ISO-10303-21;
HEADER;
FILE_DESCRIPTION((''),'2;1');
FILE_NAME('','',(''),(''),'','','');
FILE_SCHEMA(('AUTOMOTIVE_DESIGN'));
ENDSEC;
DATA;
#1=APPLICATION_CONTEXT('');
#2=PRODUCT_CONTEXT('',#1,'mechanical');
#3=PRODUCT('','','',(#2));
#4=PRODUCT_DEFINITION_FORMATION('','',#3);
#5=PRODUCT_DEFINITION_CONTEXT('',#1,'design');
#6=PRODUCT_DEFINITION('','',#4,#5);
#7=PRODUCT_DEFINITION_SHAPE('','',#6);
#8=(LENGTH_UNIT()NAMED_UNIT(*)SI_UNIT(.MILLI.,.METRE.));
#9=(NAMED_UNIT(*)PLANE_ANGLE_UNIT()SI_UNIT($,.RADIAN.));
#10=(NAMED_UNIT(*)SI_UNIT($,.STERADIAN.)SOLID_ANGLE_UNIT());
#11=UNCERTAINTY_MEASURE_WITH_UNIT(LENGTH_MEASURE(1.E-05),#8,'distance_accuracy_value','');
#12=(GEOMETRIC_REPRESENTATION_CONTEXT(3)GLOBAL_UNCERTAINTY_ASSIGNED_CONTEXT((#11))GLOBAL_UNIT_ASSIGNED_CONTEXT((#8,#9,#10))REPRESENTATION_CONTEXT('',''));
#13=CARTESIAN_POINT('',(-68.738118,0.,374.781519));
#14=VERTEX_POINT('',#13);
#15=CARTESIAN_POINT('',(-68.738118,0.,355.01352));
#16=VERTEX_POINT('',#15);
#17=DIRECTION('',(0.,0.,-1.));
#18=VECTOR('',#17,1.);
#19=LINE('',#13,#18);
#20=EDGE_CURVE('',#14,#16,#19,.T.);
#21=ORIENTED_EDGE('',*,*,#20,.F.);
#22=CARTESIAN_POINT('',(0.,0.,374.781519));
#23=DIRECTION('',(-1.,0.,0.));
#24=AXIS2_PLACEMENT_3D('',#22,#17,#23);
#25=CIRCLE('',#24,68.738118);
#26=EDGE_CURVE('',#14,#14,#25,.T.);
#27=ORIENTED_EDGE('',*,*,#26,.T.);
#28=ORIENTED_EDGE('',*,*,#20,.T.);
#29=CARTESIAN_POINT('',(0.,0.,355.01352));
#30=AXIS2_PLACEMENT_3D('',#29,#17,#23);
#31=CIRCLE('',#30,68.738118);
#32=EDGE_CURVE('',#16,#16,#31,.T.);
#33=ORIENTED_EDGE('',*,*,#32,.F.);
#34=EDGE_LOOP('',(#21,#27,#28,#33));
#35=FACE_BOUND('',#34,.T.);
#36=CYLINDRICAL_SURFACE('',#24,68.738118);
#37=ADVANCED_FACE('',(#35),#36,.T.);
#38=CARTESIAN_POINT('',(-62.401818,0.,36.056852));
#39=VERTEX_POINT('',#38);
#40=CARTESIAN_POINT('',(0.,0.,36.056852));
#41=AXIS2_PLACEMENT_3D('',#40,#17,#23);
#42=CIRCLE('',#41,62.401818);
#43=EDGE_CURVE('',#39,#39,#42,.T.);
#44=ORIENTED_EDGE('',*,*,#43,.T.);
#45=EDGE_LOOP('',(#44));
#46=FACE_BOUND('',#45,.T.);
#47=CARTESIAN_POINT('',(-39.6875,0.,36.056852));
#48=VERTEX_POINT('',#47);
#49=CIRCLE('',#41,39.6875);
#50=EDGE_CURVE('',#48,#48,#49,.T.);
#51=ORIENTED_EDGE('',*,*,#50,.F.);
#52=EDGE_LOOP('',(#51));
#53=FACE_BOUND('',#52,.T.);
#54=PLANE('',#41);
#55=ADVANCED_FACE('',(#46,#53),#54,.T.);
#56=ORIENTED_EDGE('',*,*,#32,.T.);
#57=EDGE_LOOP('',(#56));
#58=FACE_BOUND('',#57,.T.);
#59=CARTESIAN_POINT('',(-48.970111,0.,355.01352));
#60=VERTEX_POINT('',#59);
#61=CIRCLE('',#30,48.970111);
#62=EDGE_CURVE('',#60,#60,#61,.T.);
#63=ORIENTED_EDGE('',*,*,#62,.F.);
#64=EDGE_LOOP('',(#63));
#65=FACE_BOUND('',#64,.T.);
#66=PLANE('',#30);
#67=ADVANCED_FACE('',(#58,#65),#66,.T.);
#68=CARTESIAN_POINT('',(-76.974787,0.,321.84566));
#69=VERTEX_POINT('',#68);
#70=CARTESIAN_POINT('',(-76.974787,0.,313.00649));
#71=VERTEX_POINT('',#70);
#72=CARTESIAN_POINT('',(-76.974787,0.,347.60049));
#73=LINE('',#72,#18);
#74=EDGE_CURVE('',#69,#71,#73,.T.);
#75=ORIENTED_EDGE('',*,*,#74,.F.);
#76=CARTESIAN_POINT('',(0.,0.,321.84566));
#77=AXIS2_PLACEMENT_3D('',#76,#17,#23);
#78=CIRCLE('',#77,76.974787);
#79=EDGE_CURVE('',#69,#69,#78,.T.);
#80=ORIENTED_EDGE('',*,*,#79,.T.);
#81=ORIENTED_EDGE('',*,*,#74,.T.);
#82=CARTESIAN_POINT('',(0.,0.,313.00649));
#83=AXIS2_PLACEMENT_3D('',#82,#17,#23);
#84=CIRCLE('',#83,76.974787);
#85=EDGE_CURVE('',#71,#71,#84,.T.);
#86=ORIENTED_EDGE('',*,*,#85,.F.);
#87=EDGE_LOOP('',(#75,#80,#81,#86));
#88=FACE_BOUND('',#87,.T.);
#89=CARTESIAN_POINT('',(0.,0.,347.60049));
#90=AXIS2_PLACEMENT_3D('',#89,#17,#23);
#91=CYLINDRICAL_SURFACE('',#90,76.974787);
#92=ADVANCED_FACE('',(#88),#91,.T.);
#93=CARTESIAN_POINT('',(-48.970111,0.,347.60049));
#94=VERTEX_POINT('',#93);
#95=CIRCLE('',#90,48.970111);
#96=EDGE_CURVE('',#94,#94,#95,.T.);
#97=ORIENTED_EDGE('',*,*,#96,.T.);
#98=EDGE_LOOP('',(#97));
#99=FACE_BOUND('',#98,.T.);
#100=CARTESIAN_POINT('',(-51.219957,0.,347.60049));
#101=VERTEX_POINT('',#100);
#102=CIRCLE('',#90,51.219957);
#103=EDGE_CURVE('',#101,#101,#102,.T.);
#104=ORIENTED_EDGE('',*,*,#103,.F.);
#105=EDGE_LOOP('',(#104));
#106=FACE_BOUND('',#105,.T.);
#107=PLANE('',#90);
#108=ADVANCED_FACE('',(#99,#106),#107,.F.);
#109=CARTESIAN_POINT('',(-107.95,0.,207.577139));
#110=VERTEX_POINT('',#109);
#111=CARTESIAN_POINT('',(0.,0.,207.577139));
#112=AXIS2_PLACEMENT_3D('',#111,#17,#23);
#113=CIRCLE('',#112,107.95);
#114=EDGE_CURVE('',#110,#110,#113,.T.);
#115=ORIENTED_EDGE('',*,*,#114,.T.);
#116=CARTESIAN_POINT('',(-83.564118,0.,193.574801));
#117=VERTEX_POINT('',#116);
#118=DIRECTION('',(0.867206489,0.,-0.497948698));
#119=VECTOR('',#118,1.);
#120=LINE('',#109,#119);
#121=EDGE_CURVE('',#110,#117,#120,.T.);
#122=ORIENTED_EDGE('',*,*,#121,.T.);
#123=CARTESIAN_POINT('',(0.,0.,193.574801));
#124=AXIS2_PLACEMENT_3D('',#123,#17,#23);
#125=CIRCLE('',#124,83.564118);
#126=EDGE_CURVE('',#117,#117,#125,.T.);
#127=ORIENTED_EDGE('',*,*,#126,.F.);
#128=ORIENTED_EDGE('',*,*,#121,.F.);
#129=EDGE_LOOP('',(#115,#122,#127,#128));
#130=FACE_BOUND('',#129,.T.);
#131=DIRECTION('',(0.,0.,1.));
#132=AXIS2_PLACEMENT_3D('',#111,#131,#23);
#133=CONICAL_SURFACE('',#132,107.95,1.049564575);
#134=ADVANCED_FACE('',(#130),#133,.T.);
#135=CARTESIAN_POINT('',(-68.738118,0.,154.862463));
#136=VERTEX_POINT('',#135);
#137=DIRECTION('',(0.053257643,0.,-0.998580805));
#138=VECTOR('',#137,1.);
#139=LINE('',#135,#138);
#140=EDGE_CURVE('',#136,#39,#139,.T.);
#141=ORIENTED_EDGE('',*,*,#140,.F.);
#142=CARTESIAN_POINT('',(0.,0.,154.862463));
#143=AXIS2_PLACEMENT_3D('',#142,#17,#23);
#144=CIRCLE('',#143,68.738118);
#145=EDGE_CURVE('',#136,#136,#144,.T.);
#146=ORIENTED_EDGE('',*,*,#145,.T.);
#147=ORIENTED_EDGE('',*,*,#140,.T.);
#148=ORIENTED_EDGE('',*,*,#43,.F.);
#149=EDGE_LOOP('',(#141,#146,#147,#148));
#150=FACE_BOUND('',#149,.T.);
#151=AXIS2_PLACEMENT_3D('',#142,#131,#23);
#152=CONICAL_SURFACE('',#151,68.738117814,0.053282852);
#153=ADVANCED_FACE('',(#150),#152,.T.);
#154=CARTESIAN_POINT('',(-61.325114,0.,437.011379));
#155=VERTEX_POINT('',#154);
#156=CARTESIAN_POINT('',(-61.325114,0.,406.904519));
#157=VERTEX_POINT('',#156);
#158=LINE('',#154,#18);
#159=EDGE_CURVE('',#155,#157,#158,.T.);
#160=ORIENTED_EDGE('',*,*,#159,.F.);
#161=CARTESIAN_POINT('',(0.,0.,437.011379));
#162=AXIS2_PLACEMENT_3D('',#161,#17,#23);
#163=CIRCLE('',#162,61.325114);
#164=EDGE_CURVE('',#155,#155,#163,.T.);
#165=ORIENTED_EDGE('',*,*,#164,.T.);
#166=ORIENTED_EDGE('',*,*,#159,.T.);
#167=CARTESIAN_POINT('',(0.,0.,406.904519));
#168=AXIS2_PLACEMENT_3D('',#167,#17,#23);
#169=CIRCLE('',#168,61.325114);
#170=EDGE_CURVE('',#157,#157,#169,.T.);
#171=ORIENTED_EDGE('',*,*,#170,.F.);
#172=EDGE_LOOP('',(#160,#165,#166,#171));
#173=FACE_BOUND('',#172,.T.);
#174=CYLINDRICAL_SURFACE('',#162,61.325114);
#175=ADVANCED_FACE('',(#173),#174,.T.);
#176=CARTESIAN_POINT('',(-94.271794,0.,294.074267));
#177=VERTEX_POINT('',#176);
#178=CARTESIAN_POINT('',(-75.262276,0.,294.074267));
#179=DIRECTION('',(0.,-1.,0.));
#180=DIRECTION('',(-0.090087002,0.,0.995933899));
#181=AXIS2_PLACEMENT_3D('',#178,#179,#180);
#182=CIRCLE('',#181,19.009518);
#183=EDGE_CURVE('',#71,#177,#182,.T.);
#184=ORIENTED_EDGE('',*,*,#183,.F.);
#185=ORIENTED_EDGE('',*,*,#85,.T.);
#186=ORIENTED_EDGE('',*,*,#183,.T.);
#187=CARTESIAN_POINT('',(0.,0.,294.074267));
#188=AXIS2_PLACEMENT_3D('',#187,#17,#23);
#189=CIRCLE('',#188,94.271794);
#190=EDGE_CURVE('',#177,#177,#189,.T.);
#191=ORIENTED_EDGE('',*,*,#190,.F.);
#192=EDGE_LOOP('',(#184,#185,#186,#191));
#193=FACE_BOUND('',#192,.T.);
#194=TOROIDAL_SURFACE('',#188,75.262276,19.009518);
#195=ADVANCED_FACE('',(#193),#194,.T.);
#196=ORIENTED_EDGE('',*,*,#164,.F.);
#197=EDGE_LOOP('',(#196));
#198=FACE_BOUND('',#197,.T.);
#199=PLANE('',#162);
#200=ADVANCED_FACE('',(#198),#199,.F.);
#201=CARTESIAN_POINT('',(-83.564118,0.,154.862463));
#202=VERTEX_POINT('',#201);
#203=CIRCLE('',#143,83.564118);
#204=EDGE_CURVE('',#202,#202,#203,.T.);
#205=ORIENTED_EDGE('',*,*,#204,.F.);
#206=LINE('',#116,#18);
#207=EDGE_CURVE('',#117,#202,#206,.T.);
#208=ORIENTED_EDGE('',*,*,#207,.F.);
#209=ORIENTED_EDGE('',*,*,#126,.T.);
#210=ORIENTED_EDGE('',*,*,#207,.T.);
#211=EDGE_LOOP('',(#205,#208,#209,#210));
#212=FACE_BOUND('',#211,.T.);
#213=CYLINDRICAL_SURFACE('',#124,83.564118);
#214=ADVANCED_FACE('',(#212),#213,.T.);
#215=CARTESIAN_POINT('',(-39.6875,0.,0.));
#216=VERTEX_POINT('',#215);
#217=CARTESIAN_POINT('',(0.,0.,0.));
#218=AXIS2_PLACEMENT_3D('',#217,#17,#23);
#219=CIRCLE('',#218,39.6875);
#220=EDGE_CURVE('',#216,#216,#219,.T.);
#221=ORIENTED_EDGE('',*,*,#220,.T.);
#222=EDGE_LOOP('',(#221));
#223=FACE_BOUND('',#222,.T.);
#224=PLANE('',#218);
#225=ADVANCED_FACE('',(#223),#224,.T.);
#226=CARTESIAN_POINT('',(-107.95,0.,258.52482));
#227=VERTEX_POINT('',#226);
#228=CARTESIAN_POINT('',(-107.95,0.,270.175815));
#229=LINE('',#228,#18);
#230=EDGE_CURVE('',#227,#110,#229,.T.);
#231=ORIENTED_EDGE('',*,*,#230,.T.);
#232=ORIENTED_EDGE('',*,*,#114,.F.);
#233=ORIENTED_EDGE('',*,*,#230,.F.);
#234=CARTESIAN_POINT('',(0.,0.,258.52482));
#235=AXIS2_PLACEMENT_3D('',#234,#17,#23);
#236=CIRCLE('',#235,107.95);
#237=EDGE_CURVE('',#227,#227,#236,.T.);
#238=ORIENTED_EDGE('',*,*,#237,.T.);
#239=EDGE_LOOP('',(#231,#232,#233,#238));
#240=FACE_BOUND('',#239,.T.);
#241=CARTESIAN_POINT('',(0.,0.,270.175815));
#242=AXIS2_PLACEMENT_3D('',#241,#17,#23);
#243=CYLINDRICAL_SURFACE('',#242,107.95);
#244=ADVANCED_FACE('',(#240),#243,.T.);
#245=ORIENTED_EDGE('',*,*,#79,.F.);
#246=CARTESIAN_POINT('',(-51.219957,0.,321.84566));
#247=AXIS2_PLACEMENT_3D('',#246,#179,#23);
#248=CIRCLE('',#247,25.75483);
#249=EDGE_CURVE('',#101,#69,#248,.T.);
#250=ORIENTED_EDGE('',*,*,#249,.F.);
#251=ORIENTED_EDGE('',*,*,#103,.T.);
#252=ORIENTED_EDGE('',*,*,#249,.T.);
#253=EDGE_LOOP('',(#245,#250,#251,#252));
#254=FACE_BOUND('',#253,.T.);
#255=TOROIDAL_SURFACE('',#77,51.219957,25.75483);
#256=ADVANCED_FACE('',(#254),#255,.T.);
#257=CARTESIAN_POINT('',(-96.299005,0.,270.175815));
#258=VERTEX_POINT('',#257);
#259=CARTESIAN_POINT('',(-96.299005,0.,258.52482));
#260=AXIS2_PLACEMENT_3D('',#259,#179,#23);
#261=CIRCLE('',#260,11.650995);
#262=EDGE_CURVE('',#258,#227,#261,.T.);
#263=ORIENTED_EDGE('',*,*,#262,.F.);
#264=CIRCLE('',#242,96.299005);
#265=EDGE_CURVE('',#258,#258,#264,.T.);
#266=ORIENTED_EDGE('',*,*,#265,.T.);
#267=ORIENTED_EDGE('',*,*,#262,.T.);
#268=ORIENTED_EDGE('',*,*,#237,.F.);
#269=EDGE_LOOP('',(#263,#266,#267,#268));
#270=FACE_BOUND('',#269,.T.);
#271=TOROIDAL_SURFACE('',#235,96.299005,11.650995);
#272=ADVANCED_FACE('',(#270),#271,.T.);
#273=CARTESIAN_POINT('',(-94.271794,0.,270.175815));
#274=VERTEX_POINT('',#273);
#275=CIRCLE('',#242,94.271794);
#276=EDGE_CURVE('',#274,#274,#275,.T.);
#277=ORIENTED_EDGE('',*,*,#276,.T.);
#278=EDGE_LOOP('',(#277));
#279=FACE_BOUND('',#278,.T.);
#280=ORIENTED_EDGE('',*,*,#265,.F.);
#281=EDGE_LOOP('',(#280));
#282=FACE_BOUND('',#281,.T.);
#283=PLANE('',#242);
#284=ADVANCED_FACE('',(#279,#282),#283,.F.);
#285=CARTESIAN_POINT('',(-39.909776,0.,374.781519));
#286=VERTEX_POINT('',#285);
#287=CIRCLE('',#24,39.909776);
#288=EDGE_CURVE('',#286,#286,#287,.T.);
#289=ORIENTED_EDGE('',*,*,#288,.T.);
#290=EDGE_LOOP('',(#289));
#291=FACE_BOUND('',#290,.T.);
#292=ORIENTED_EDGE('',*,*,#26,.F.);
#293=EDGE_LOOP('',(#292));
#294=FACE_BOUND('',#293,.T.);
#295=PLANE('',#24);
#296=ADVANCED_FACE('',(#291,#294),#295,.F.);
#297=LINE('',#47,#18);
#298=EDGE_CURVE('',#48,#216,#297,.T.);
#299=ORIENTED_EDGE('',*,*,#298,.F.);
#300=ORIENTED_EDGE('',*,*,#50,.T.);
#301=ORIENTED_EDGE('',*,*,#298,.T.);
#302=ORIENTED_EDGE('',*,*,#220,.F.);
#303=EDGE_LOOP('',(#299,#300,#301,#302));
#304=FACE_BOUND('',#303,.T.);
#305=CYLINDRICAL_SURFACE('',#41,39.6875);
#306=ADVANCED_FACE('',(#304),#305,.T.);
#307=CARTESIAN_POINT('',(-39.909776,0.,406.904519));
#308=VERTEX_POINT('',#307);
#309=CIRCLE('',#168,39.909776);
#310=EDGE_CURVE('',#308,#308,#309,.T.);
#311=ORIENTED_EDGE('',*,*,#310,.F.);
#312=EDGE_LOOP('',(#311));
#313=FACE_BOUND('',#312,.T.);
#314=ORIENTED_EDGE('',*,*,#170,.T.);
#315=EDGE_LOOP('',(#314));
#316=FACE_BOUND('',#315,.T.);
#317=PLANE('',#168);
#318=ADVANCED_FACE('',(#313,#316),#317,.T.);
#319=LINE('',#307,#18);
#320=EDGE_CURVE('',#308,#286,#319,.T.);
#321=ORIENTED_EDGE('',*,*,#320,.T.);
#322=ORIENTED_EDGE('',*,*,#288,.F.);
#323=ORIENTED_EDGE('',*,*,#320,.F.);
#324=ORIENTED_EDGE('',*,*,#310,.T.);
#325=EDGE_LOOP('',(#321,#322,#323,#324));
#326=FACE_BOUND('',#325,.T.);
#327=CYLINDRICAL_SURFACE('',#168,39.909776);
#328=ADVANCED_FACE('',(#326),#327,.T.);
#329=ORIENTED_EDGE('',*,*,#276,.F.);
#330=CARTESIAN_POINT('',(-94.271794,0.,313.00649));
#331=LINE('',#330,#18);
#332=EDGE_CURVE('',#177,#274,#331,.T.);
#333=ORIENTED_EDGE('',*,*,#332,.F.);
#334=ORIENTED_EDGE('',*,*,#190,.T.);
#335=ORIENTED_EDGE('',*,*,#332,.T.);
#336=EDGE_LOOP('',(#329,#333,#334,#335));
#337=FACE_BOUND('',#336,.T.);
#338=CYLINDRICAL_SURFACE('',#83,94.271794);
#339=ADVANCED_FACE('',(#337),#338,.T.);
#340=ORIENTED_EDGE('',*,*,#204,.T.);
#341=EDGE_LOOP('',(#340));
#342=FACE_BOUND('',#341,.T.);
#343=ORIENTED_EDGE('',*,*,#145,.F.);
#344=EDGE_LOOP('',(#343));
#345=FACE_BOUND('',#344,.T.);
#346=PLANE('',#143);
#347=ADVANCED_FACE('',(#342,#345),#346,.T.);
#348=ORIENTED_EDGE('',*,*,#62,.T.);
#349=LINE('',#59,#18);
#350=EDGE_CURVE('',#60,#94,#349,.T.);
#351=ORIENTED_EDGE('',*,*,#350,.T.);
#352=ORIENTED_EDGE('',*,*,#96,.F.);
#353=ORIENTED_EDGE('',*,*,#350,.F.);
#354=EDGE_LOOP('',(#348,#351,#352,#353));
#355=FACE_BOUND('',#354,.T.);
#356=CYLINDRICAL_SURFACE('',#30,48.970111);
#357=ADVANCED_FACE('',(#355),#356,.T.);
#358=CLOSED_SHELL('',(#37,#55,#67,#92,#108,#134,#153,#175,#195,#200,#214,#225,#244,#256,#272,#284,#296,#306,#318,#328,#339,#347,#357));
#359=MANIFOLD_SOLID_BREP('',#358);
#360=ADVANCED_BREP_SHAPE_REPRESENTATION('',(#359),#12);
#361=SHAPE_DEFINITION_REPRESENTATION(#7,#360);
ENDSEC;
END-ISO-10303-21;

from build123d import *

# Parameters (mm, degrees)
F2_R = 25.7548302834
F4_R = 11.650994652


# Not quite as in the source:
# - a fillet or chamfer that OpenCascade refuses, or shapes differently, is made with other operations: its cross-section is extruded or revolved along the edge and cut away or added


with BuildPart() as f1:
    # F0 (on Front) → F1 (revolve)
    with BuildSketch(Plane.XZ):
        Polygon((0, 0), (0, 437.0113793103), (-61.3251142204, 437.0113793103), (-61.3251142204, 406.9045186043), (-39.9097763002, 406.9045186043), (-39.9097763002, 374.7815191746), (-68.7381178141, 374.7815191746), (-68.7381178141, 355.0135195255), (-48.9701107144, 355.0135195255), (-48.9701107144, 347.6004898548), (-76.974786818, 347.6004898548), (-76.974786818, 313.006490469), (-94.2717939615, 313.006490469), (-94.2717939615, 270.1758146286), (-107.95, 270.1758146286), (-107.95, 207.5771391392), (-83.5641175508, 193.5748010874), (-83.5641175508, 154.8624634743), (-68.7381178141, 154.8624634743), (-62.401818486, 36.0568519682), (-39.6875, 36.0568519682), (-39.6875, 0), align=None)
    revolve(axis=Axis((0, 0, 218.5056896552), (0, 0, -1)))

    # F2
    f2_edges = [f1.edges().sort_by_distance(p)[0] for p in [
        (76.974787, 0, 347.60049),
    ]]
    fillet(f2_edges, radius=F2_R)

    # F3: fillet of radius 19.0095175901 on 1 edges, made by hand

    # F3_s1 → F3_t2 (revolve, cut)
    with BuildSketch(Plane.XZ):
        with BuildLine():
            ThreePointArc((-76.974786818, 313.006490469), (-89.296444613, 306.8962751619), (-94.2717939615, 294.0742674886))
            Line((-94.2717939615, 294.0742674886), (-94.2717939615, 313.006490469))
            Line((-94.2717939615, 313.006490469), (-76.974786818, 313.006490469))
        make_face()
    revolve(axis=Axis((0, 0, 313.006490469), (0, 0, -1)), mode=Mode.SUBTRACT)

    # F4
    f4_edges = [f1.edges().sort_by_distance(p)[0] for p in [
        (107.95, 0, 270.175815),
    ]]
    fillet(f4_edges, radius=F4_R)


solid = f1.part
